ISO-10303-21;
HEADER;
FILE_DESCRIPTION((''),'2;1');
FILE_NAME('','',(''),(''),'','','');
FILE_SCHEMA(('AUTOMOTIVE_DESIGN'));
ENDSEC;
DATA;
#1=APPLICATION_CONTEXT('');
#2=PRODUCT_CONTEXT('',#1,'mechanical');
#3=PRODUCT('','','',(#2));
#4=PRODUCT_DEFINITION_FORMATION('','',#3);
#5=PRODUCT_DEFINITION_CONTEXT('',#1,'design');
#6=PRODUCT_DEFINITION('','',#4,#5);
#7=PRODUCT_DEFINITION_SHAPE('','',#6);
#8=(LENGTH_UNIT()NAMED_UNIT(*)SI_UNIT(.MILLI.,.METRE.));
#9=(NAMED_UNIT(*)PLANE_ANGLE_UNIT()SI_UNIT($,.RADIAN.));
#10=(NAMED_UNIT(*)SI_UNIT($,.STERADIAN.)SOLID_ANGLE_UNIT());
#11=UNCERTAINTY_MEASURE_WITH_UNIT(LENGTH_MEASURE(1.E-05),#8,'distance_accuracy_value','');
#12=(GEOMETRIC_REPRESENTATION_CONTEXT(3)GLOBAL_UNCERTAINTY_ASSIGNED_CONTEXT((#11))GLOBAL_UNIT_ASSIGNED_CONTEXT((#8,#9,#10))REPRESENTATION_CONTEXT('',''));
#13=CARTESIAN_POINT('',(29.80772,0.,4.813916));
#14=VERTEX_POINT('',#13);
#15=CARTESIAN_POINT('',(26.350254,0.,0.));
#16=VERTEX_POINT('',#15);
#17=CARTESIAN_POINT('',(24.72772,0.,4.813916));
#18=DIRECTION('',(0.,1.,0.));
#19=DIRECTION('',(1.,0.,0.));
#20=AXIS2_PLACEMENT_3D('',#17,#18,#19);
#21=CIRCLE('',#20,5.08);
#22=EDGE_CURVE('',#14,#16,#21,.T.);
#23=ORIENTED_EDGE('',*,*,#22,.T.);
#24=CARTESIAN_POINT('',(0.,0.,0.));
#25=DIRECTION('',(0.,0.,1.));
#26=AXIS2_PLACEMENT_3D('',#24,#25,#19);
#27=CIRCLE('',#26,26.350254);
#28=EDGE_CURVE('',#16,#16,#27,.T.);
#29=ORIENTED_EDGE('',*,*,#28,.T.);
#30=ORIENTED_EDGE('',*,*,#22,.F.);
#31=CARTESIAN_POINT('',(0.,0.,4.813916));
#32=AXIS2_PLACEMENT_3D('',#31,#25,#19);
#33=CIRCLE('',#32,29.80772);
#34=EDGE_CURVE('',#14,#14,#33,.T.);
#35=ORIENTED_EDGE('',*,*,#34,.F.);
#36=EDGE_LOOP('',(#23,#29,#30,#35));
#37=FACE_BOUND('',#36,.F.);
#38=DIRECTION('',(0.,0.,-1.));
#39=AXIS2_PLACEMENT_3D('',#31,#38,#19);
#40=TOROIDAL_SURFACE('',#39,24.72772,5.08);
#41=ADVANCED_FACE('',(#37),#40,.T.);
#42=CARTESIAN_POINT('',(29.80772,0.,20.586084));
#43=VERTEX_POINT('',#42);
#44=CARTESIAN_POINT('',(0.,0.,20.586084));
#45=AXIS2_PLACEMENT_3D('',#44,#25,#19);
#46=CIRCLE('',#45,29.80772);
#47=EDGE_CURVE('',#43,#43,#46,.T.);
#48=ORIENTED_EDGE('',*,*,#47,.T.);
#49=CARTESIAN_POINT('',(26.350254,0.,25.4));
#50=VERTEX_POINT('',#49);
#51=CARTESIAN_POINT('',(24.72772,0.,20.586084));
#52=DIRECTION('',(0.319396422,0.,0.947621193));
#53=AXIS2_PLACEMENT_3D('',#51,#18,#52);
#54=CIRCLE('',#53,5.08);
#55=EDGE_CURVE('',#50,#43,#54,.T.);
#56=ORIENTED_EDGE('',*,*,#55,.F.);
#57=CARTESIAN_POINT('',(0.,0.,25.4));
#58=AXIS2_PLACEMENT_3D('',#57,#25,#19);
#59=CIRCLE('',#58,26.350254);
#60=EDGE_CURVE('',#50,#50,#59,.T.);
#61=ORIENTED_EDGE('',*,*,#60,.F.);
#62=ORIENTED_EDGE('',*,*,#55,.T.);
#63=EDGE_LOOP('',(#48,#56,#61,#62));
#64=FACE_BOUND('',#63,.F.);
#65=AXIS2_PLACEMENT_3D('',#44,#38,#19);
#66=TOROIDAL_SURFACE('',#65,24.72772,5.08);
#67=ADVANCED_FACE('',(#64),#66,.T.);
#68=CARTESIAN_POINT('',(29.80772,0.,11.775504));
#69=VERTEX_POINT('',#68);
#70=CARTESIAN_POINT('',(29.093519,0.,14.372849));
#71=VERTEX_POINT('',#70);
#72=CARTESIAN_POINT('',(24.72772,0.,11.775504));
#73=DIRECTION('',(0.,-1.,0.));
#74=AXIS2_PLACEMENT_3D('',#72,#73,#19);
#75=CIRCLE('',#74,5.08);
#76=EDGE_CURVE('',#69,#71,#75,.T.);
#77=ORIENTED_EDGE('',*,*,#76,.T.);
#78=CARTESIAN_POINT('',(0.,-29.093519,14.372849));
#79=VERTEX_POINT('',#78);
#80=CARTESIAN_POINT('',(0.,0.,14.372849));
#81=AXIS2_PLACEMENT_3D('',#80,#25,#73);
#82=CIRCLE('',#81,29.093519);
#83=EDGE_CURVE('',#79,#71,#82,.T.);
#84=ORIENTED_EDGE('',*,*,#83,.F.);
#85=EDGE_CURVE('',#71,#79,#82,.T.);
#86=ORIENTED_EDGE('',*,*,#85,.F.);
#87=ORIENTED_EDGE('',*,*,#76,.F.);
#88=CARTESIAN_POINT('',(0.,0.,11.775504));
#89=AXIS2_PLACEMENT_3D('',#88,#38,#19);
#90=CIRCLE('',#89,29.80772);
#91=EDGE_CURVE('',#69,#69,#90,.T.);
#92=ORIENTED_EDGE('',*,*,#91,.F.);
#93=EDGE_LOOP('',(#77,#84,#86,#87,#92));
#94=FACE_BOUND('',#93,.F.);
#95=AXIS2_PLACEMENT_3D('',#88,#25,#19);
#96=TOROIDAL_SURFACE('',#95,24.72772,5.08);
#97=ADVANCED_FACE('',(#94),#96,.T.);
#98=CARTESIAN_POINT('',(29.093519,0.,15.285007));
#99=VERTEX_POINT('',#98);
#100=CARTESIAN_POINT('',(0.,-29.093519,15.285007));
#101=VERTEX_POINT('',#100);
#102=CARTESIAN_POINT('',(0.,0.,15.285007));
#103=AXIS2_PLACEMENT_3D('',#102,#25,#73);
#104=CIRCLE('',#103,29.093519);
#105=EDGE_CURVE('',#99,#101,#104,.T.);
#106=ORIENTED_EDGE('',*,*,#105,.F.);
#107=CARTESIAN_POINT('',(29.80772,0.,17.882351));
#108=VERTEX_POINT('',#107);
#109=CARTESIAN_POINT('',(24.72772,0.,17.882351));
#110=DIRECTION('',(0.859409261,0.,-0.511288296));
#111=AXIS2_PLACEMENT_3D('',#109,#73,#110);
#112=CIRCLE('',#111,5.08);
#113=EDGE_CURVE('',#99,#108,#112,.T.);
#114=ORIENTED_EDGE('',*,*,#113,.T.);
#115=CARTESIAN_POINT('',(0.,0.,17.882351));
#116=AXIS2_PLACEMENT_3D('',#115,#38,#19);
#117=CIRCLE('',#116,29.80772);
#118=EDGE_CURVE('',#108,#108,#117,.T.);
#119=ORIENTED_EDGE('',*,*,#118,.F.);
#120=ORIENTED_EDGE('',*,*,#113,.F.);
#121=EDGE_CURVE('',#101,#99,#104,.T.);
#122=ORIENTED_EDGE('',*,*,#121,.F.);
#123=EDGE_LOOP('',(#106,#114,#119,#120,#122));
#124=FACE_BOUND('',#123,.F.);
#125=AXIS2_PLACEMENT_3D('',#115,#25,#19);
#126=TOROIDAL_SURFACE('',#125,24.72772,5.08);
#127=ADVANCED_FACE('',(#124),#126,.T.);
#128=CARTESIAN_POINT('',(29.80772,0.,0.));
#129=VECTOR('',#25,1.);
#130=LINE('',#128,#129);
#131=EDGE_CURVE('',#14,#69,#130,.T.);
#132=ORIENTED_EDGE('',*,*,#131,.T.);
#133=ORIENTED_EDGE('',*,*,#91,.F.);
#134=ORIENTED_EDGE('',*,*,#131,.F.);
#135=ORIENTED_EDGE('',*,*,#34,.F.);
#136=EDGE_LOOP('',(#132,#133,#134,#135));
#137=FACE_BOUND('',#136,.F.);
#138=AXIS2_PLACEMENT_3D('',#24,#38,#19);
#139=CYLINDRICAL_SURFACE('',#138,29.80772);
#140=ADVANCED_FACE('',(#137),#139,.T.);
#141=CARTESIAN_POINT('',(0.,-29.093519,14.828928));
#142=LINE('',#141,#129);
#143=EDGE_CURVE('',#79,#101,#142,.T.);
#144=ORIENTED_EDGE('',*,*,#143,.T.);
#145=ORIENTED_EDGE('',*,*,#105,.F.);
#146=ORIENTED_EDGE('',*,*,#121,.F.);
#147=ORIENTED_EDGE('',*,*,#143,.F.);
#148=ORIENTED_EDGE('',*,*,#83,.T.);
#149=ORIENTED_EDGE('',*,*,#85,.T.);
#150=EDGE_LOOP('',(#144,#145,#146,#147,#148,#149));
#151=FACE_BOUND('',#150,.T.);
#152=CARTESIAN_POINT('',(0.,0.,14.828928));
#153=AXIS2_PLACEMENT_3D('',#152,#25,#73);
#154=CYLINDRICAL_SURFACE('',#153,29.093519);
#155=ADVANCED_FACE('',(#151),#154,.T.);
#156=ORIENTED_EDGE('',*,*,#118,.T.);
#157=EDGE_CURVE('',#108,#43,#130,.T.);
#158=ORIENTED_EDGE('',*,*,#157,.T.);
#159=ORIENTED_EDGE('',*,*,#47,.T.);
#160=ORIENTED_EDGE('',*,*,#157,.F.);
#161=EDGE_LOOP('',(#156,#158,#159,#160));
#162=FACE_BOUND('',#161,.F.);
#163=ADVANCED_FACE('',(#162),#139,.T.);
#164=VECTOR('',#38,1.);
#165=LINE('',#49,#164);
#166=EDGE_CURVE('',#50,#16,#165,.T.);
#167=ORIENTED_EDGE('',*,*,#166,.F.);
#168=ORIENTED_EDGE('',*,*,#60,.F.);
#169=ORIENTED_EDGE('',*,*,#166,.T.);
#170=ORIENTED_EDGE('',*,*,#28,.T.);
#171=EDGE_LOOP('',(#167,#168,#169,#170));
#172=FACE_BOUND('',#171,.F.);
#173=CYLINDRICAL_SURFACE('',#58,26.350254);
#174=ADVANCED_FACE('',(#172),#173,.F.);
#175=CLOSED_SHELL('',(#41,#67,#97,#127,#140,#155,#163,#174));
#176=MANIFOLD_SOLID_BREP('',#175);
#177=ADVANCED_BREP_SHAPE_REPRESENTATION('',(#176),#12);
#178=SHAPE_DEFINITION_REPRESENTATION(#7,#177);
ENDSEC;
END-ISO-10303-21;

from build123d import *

# Parameters (mm, degrees)
F0_R     = 29.8077198066
F1_DEPTH = 25.4
F2_R     = 26.3502536292
F3_DEPTH = 25.4
F4_W     = 2.8885006905
F4_H     = 0.9121578187


# Not quite as in the source:
# - a fillet or chamfer that OpenCascade refuses, or shapes differently, is made with other operations: its cross-section is extruded or revolved along the edge and cut away or added


with BuildPart() as f1:
    # F0 (on Top) → F1 (new body)
    with BuildSketch(Plane.XY):
        Circle(F0_R)
    extrude(amount=F1_DEPTH)

    # F2 (on face) → F3 (cut)
    with BuildSketch(Plane.XY.offset(25.4)):
        Circle(F2_R)
    extrude(amount=-F3_DEPTH, mode=Mode.SUBTRACT)

    # F4 (on Right) → F6 (revolve, cut)
    with BuildSketch(Plane.YZ):
        with Locations((-30.5377691984, 14.828927815)):
            Rectangle(F4_W, F4_H)
    revolve(axis=Axis((0, 0, 31.8907126784), (0, 0, 1)), mode=Mode.SUBTRACT)

    # F7: fillet of radius 5.08 on 6 edges, made by hand

    # F7_s1 → F7_t2 (revolve, cut)
    with BuildSketch(Plane.XZ):
        with BuildLine():
            ThreePointArc((29.0935188532, 15.2850067243), (29.6259163705, 16.5354769537), (29.8077198066, 17.8823512692))
            Line((29.8077198066, 17.8823512692), (29.9093198066, 17.8823512692))
            Line((29.9093198066, 17.8823512692), (29.9093198066, 15.2850067243))
            Line((29.9093198066, 15.2850067243), (29.8077198066, 15.1834067243))
            ThreePointArc((29.8077198066, 15.1834067243), (29.4506193299, 15.1834067243), (29.1808348341, 15.2330598334))
            Line((29.1808348341, 15.2330598334), (29.0935188532, 15.2850067243))
        make_face()
    revolve(axis=Axis((0, 0, 15.2850067243), (0, 0, -1)), mode=Mode.SUBTRACT)

    # F7_s3 → F7_t4 (revolve, cut)
    with BuildSketch(Plane.XZ):
        with BuildLine():
            ThreePointArc((26.3502536292, 25.4), (28.8537876574, 23.5495222224), (29.8077198066, 20.5860843387))
            Line((29.8077198066, 20.5860843387), (29.9093198066, 20.5860843387))
            Line((29.9093198066, 20.5860843387), (29.9093198066, 25.4))
            Line((29.9093198066, 25.4), (29.8077198066, 25.5016))
            ThreePointArc((29.8077198066, 25.5016), (28.0789867179, 25.5016), (26.3827043057, 25.4962783132))
            Line((26.3827043057, 25.4962783132), (26.3502536292, 25.4))
        make_face()
    revolve(axis=Axis((0, 0, 25.4), (0, 0, 1)), mode=Mode.SUBTRACT)

    # F7_s5 → F7_t6 (revolve, cut)
    with BuildSketch(Plane.XZ):
        with BuildLine():
            ThreePointArc((29.8077198066, 4.8139156613), (28.8537876574, 1.8504777776), (26.3502536292, 0))
            Line((26.3502536292, 0), (26.3827043057, -0.0962783132))
            ThreePointArc((26.3827043057, -0.0962783132), (28.0789867179, -0.1016), (29.8077198066, -0.1016))
            Line((29.8077198066, -0.1016), (29.9093198066, 0))
            Line((29.9093198066, 0), (29.9093198066, 4.8139156613))
            Line((29.9093198066, 4.8139156613), (29.8077198066, 4.8139156613))
        make_face()
    revolve(axis=Axis((0, 0, 0), (0, 0, 1)), mode=Mode.SUBTRACT)

    # F7_s7 → F7_t8 (revolve, cut)
    with BuildSketch(Plane.XZ):
        with BuildLine():
            ThreePointArc((29.8077198066, 11.7755043607), (29.6259163705, 13.1223786762), (29.0935188532, 14.3728489056))
            Line((29.0935188532, 14.3728489056), (29.1808348341, 14.4247957965))
            ThreePointArc((29.1808348341, 14.4247957965), (29.4506193299, 14.4744489056), (29.8077198066, 14.4744489056))
            Line((29.8077198066, 14.4744489056), (29.9093198066, 14.3728489056))
            Line((29.9093198066, 14.3728489056), (29.9093198066, 11.7755043607))
            Line((29.9093198066, 11.7755043607), (29.8077198066, 11.7755043607))
        make_face()
    revolve(axis=Axis((0, 0, 14.3728489056), (0, 0, -1)), mode=Mode.SUBTRACT)


solid = f1.part
